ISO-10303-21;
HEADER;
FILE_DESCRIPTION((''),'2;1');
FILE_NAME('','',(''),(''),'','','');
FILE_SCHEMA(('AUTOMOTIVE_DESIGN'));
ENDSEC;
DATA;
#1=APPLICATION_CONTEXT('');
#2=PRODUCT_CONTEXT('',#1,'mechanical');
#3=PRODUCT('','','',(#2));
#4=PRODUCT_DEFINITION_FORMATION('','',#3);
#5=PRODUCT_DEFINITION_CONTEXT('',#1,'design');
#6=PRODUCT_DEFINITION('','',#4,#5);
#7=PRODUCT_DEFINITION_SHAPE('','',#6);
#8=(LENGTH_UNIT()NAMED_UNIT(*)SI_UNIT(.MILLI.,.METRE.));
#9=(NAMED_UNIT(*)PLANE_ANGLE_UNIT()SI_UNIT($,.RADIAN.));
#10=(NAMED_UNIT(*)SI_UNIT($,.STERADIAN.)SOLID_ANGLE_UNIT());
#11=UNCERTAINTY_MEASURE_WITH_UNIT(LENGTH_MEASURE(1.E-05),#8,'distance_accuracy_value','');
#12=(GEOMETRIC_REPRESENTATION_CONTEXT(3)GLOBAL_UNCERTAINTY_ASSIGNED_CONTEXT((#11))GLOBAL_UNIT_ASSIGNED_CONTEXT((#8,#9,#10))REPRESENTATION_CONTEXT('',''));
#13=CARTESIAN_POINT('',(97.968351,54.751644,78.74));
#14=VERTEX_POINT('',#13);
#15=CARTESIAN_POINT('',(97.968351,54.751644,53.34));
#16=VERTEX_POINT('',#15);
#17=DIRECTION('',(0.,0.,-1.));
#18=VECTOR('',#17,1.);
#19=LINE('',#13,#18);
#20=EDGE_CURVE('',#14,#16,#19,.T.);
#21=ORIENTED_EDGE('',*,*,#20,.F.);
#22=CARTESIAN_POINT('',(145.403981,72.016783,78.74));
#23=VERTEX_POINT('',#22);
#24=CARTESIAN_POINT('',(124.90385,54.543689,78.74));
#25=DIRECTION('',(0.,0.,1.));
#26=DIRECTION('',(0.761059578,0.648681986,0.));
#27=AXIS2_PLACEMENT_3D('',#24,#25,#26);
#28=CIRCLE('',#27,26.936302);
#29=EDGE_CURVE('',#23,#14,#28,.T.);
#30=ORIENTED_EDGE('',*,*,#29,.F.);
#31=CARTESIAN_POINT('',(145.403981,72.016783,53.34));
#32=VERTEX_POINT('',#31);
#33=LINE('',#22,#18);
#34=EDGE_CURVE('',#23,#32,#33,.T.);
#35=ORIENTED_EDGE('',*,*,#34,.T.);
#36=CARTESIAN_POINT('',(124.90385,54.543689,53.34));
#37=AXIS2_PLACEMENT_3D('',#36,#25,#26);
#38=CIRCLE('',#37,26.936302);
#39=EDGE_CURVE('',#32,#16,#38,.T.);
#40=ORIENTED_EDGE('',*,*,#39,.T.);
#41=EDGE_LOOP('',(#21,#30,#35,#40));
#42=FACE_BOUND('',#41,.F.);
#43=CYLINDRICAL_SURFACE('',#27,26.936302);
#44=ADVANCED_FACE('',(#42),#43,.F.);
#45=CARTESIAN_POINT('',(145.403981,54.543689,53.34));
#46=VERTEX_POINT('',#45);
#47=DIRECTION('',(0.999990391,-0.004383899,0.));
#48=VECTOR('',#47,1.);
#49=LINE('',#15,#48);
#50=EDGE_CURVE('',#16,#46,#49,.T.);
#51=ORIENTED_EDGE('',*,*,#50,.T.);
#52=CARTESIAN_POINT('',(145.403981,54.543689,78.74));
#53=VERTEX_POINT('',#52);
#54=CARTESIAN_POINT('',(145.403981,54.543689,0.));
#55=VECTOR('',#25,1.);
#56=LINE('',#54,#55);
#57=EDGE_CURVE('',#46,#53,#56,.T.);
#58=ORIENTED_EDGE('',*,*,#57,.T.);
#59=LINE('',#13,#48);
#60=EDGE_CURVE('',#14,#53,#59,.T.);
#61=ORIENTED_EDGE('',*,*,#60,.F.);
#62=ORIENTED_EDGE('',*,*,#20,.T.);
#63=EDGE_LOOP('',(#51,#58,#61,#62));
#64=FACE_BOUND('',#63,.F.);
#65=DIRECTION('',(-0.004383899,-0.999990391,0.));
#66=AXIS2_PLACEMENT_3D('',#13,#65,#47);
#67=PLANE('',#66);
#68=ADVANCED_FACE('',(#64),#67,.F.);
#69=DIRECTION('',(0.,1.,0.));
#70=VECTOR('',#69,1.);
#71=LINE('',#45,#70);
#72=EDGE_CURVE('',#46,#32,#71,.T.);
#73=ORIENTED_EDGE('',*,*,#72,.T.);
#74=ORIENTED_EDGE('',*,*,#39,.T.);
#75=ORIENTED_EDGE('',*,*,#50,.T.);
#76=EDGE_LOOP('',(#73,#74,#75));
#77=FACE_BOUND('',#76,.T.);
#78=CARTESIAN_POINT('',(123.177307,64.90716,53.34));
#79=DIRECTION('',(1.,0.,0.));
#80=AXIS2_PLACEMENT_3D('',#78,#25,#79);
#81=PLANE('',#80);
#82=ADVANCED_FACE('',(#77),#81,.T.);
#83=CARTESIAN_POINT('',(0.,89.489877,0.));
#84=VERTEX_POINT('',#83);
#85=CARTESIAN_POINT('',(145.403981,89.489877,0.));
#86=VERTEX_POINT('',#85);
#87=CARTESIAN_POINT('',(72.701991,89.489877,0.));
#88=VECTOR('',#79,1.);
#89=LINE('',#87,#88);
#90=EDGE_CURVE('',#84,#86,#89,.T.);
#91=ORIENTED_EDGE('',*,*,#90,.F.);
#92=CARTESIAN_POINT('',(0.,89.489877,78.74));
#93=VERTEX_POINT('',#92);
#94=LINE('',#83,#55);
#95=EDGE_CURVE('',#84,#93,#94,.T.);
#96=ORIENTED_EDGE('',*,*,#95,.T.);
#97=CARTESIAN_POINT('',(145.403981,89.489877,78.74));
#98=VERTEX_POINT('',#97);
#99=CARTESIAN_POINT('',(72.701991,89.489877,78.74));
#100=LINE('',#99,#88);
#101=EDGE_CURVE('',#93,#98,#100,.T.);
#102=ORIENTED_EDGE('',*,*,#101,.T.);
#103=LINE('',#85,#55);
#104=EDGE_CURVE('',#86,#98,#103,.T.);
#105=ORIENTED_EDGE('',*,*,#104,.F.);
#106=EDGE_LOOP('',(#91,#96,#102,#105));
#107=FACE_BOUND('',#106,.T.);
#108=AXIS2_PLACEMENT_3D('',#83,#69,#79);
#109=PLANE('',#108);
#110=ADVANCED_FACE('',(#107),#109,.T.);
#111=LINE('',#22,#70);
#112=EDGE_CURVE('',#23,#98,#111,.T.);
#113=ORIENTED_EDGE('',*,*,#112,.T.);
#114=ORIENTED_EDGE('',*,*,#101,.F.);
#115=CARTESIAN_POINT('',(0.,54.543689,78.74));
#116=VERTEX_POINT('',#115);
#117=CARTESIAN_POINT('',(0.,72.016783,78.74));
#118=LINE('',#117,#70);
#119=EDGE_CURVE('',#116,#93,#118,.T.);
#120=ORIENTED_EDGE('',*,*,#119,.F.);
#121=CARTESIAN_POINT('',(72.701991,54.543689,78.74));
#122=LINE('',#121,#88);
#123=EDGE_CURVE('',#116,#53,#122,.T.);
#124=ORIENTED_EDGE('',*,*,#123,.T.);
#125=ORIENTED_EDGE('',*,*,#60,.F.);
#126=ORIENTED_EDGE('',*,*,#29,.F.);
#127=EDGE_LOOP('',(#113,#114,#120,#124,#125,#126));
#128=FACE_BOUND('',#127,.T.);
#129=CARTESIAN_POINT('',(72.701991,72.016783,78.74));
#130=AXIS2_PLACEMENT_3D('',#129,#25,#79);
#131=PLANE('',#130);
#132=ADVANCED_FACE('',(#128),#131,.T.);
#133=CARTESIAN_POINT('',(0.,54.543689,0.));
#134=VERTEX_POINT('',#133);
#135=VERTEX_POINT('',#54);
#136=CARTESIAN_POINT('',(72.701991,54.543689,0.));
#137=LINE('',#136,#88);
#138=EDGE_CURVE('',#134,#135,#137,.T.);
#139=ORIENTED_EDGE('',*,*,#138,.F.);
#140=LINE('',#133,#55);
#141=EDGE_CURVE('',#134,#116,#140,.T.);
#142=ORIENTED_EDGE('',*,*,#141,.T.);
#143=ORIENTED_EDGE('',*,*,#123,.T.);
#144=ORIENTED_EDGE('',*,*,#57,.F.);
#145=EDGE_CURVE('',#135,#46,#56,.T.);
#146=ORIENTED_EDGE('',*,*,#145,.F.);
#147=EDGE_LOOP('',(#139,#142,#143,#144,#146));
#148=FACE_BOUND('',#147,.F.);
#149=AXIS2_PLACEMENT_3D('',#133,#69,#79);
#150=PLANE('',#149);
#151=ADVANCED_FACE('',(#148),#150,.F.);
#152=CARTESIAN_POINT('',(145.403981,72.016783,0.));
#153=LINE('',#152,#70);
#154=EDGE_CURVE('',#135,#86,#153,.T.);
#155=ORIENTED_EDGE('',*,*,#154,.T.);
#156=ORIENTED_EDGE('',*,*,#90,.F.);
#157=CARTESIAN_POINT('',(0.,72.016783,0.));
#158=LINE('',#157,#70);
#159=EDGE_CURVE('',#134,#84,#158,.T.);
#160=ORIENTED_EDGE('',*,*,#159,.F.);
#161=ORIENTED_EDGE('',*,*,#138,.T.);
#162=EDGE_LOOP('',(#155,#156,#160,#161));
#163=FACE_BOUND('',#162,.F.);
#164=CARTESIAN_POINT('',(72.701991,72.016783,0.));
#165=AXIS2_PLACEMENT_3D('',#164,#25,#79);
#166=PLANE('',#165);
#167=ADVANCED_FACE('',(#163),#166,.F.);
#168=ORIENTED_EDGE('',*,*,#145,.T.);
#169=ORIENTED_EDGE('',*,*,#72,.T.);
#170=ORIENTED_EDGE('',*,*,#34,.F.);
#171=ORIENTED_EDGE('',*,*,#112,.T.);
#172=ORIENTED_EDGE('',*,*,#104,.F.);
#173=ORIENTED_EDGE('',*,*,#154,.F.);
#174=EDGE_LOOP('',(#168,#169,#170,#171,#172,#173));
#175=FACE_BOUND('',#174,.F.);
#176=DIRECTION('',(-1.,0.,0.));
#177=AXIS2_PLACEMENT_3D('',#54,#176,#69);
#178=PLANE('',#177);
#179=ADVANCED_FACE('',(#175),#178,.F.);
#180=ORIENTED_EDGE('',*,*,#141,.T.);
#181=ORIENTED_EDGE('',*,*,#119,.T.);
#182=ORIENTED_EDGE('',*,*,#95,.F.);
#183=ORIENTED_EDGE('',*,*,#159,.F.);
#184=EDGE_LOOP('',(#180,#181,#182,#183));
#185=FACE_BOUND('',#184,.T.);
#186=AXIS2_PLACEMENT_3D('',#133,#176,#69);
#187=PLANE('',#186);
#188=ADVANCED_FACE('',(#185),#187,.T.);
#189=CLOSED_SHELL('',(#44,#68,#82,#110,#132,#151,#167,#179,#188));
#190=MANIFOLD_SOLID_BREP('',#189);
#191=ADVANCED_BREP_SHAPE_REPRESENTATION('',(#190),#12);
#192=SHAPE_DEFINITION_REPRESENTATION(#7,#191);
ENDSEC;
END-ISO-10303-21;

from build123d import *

# Parameters (mm, degrees)
F0_W     = 145.4039812088
F0_H     = 34.9461883307
F1_DEPTH = 78.74
F5_DEPTH = 25.4


# Not quite as in the source:
# - the program builds the solid bodies; features that only make, move or delete a surface that nothing else refers to are left out


with BuildPart() as f1:
    # F0 (on Top) → F1 (new body)
    with BuildSketch(Plane.XY):
        with Locations((72.7019906044, 72.0167830586)):
            Rectangle(F0_W, F0_H)
    extrude(amount=F1_DEPTH)

    # F4 (on face) → F5 (cut)
    with BuildSketch(Plane.XY.offset(78.74)):
        with BuildLine():
            Line((145.4039812088, 54.5436888933), (145.4039812088, 72.0167830586))
            ThreePointArc((145.4039812088, 72.0167830586), (115.6911009346, 79.8555366854), (97.9683505694, 54.7516439176))
            Line((97.9683505694, 54.7516439176), (145.4039812088, 54.5436888933))
        make_face()
    extrude(amount=-F5_DEPTH, mode=Mode.SUBTRACT)


solid = f1.part
